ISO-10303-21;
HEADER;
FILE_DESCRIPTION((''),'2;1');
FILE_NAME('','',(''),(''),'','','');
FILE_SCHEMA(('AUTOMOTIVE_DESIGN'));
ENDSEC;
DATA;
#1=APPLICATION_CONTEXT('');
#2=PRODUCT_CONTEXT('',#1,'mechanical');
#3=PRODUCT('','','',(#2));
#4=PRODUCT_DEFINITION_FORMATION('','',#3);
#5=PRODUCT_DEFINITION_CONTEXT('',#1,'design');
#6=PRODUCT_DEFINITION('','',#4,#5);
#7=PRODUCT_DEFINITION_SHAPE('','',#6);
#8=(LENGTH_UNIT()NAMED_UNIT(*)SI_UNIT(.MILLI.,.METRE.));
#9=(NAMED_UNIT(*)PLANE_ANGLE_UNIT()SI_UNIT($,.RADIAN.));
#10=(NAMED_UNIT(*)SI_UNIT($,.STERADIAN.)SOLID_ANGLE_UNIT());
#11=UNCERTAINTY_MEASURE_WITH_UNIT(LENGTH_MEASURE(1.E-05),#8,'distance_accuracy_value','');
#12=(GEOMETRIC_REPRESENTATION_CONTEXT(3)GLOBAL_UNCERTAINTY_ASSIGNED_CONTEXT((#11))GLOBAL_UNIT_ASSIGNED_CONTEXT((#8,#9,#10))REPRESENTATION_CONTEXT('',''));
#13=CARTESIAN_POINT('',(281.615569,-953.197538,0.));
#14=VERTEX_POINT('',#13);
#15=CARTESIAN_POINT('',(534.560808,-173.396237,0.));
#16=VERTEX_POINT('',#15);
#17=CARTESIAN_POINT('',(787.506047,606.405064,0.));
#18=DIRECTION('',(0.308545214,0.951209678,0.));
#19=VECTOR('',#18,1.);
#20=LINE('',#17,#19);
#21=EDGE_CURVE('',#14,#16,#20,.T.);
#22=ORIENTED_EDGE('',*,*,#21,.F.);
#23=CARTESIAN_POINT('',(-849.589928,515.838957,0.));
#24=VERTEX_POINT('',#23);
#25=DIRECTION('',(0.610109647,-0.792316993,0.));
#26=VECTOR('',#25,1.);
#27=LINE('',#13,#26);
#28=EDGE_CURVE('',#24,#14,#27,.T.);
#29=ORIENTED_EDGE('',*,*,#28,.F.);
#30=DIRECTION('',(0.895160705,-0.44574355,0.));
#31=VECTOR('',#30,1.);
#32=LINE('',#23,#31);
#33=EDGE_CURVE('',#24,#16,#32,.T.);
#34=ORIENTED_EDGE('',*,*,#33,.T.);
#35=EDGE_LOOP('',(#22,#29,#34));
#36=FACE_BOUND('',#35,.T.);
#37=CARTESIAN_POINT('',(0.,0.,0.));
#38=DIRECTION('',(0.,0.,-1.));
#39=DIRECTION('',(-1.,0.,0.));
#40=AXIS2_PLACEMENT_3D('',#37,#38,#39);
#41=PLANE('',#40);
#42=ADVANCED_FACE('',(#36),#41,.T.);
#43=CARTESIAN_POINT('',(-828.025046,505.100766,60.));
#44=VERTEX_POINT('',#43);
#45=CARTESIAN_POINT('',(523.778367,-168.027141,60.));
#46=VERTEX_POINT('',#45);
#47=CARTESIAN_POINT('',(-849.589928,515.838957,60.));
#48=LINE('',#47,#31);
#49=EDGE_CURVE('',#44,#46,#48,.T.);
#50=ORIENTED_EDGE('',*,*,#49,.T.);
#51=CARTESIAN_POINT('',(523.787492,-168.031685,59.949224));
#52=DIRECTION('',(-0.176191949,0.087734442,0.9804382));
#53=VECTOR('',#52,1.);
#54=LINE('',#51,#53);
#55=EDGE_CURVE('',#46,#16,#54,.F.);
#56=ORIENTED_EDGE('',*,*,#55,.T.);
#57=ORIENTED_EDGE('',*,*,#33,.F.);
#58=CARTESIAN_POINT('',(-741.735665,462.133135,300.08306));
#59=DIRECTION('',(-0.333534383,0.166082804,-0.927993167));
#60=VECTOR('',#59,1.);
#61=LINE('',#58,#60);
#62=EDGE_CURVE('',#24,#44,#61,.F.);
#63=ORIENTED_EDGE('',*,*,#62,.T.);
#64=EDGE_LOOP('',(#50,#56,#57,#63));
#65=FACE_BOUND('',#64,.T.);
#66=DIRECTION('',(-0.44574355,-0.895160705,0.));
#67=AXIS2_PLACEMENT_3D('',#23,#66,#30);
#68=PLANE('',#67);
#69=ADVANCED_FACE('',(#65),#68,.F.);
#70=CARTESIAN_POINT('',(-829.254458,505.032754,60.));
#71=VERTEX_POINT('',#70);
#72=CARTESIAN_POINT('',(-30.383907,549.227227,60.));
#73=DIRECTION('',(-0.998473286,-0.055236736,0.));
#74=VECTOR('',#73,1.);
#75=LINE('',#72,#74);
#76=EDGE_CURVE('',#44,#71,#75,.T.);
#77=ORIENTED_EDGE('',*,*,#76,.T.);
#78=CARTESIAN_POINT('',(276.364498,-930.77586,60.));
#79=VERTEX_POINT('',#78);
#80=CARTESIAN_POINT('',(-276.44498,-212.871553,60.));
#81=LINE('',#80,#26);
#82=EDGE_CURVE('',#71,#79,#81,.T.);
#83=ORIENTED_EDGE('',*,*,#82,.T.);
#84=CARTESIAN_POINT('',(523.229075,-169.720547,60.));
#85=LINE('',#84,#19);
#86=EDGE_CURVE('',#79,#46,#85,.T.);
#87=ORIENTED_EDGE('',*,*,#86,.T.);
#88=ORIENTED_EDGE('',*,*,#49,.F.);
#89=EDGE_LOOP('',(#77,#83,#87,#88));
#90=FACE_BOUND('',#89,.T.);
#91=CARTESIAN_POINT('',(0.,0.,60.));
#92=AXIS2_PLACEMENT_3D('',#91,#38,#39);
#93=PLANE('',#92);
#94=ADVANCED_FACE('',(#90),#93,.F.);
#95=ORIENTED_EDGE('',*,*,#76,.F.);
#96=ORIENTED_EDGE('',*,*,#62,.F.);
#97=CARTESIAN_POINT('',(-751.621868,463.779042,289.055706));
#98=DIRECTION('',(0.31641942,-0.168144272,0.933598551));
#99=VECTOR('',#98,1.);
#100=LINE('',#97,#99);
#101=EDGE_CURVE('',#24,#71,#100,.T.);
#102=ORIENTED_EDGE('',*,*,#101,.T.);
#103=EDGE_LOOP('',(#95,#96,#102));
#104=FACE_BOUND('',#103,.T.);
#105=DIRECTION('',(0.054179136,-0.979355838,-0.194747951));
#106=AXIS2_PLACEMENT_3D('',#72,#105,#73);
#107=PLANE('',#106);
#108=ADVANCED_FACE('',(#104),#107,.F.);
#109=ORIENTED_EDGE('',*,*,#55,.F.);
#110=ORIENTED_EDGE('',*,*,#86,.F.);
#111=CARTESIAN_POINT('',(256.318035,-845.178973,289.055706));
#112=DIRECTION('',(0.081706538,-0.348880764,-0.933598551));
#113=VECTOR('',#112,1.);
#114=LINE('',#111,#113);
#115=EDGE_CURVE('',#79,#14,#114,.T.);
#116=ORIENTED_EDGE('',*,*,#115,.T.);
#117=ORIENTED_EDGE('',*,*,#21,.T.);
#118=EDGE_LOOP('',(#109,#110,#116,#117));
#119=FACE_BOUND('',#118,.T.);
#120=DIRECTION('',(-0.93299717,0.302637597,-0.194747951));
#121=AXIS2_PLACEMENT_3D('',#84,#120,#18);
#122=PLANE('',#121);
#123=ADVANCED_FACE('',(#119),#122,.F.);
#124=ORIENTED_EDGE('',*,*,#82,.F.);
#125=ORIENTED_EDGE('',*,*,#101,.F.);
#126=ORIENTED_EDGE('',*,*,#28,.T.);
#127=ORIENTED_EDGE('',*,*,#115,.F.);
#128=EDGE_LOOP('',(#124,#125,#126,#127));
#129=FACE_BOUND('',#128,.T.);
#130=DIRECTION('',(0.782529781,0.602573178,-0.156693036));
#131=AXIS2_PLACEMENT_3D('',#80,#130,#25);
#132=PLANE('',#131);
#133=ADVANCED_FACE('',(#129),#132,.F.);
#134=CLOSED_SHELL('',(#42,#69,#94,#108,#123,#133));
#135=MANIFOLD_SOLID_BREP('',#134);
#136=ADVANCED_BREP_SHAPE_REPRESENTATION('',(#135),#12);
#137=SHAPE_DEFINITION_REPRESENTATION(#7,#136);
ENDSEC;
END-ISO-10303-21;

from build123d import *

# Parameters (mm, degrees)
EXTRUDE_1_DEPTH    = 60
CHAMFER3_SIZE2     = 11.912970931
CHAMFER3_SIZE      = 60
CHAMFER4_SIZE2     = 11.912970931
CHAMFER4_SIZE      = 60
CHAMFER5_SIZE2     = 9.519169095
CHAMFER5_SIZE      = 60
CUT_EXTRUDE2_DEPTH = 2201.39802191


with BuildPart() as part:
    # Эскиз1 → Бобышка-Вытянуть1 (new body)
    with BuildSketch(Plane.XY):
        Polygon((-849.589927609, 515.838957491), (787.506047005, 606.405063543), (281.615569427, -953.197537878), align=None)
    extrude(amount=EXTRUDE_1_DEPTH)

    # Chamfer3
    chamfer3_edges = [part.edges().sort_by_distance(p)[0] for p in [
        (-31.041940302, 561.122010517, 60),
    ]]
    chamfer3_side = [part.faces().sort_by_distance(p)[0] for p in [
        (-31.041940302, 561.122010517, 59.761740581),
    ]]
    chamfer(chamfer3_edges, length=CHAMFER3_SIZE - 0.0001, length2=CHAMFER3_SIZE2 - 0.0001, reference=chamfer3_side[0])  # a hair under: the kernel refuses the full size

    # Chamfer4
    chamfer4_edges = [part.edges().sort_by_distance(p)[0] for p in [
        (532.590398399, -179.470785737, 60),
    ]]
    chamfer4_side = [part.faces().sort_by_distance(p)[0] for p in [
        (532.590398399, -179.470785737, 59.761740581),
    ]]
    chamfer(chamfer4_edges, length=CHAMFER4_SIZE - 0.0001, length2=CHAMFER4_SIZE2 - 0.0001, reference=chamfer4_side[0])  # a hair under: the kernel refuses the full size

    # Chamfer5
    chamfer5_edges = [part.edges().sort_by_distance(p)[0] for p in [
        (-283.987179091, -218.679290193, 60),
    ]]
    chamfer5_side = [part.faces().sort_by_distance(p)[0] for p in [
        (-283.987179091, -218.679290193, 59.809616618),
    ]]
    chamfer(chamfer5_edges, length=CHAMFER5_SIZE - 0.0001, length2=CHAMFER5_SIZE2 - 0.0001, reference=chamfer5_side[0])  # a hair under: the kernel refuses the full size

    # 3DSketch1 → Cut-Extrude2 (cut, through all)
    with BuildSketch(Plane(origin=(-849.589927609, 515.838957491, 0), x_dir=(0.9984732860919079, 0.05523673560980175, 0), z_dir=(0, 0, -1))):
        Polygon((0, 0), (1343.966431425, 764.63889794), (1639.599173476, 0), align=None)
    extrude(amount=-CUT_EXTRUDE2_DEPTH, mode=Mode.SUBTRACT)


solid = part.part
